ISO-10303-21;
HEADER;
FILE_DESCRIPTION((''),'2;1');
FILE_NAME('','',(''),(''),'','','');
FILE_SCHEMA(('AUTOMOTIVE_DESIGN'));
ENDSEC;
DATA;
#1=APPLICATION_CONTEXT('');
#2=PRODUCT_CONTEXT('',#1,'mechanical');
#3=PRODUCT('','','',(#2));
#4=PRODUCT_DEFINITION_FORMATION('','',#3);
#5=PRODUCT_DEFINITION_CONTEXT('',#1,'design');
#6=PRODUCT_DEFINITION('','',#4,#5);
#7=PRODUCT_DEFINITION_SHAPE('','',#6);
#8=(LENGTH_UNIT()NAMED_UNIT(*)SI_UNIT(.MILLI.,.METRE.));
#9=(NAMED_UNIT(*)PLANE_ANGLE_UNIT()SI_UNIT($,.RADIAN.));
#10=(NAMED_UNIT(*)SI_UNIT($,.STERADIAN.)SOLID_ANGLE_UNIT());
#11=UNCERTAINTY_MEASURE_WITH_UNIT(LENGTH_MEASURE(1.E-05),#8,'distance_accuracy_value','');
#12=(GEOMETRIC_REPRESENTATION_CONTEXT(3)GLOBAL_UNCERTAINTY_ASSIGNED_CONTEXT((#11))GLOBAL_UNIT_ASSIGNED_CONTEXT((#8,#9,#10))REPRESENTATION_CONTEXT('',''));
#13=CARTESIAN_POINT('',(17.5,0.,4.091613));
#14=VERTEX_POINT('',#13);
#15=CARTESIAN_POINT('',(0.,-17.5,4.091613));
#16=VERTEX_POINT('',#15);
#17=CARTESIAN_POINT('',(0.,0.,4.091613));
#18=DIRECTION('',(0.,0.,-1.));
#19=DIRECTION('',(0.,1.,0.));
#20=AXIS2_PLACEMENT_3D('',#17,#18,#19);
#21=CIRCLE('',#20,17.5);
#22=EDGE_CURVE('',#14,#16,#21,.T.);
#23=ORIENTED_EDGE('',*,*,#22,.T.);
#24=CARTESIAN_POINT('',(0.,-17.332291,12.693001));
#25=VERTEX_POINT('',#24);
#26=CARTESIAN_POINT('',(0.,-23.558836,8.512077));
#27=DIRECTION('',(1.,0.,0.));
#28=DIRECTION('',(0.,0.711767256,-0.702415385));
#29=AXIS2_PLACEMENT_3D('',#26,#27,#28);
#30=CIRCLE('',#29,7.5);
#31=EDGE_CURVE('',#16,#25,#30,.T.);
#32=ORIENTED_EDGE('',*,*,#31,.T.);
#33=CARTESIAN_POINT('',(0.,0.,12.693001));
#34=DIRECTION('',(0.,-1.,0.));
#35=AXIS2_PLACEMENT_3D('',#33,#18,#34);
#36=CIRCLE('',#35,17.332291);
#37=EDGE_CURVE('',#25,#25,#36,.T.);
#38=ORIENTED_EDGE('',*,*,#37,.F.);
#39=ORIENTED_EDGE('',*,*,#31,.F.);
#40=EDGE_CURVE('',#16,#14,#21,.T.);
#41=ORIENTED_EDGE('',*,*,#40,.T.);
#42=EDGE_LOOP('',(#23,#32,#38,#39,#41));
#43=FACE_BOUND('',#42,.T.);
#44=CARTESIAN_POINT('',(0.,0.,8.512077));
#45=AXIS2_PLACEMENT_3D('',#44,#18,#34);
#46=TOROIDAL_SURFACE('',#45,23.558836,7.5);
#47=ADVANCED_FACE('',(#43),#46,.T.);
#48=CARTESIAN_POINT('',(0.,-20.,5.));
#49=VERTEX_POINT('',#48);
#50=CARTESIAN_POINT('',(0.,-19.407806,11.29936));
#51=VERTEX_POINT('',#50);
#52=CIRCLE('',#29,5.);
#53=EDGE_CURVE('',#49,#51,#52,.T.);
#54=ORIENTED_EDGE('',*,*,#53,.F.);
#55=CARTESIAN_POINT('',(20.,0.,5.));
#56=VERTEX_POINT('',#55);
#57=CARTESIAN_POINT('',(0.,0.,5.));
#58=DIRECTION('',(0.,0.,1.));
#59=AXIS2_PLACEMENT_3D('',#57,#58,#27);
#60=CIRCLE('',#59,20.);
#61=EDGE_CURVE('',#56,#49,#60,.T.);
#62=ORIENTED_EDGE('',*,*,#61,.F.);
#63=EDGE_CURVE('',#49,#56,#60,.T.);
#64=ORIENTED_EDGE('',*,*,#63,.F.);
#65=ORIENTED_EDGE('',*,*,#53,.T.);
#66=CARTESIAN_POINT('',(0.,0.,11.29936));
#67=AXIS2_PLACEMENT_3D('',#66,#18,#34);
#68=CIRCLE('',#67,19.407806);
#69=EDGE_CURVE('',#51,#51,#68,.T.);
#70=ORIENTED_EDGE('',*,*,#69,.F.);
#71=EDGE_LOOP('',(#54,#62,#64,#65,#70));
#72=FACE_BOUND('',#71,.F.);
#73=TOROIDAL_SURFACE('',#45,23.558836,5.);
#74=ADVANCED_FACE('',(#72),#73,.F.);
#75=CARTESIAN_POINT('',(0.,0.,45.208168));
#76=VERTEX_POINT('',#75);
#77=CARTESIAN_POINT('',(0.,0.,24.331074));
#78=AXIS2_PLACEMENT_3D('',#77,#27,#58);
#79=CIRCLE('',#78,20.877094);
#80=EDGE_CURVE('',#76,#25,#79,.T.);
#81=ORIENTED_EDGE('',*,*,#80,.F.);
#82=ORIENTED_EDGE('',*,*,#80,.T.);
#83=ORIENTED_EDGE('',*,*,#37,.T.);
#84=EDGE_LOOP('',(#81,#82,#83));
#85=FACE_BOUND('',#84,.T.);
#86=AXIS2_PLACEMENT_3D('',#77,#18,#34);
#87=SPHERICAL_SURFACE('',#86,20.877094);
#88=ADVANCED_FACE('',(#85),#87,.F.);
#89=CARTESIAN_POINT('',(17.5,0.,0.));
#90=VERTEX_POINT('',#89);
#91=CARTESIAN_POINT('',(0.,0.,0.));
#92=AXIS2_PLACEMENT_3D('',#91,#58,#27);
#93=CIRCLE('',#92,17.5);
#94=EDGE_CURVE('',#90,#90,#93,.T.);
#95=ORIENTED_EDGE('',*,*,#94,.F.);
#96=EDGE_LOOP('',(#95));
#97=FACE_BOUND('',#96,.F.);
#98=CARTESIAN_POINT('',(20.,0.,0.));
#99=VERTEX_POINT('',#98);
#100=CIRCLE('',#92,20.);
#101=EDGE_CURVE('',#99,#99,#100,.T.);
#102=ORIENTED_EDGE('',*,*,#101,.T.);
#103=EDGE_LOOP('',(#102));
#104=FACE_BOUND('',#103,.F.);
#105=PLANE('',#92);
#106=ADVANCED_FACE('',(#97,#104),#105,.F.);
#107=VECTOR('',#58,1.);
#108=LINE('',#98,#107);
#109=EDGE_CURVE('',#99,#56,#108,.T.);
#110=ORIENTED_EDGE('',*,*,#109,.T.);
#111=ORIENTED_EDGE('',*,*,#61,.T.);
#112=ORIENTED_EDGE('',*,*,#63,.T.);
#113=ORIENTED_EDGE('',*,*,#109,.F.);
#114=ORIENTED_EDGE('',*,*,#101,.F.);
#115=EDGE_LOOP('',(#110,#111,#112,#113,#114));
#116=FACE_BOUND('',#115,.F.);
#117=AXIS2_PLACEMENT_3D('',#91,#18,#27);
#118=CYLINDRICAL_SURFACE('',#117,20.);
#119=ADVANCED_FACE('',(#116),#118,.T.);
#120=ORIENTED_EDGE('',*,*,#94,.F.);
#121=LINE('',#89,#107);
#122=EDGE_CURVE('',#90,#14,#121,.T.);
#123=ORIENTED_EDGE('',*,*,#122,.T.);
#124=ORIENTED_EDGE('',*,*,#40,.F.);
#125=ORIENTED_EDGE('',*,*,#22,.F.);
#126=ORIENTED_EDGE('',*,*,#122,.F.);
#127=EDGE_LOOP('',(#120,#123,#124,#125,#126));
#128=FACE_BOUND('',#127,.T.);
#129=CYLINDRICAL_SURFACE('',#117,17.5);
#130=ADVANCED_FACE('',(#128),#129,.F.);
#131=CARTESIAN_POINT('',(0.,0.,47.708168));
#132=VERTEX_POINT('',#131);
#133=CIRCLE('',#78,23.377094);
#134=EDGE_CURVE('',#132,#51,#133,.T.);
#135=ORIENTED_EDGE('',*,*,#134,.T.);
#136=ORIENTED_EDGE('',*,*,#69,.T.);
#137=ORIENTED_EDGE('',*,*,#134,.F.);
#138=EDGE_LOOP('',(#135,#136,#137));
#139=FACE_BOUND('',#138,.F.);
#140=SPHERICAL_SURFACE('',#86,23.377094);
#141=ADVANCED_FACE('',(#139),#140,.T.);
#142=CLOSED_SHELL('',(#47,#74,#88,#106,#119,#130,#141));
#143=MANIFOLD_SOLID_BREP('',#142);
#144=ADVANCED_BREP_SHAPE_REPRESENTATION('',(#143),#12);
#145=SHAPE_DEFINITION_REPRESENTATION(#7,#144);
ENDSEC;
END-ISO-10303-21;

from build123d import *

# Parameters (mm, degrees)
F0_R     = 20
F1_DEPTH = 5
F5_T     = -2.5


# Not quite as in the source:
# - a fillet or chamfer that OpenCascade refuses, or shapes differently, is made with other operations: its cross-section is extruded or revolved along the edge and cut away or added


with BuildPart() as f1:
    # F0 (on Top) → F1 (new body)
    with BuildSketch(Plane.XY):
        Circle(F0_R)
    extrude(amount=F1_DEPTH)

    # F2 (on Right) → F3 (revolve)
    with BuildSketch(Plane.YZ):
        with BuildLine():
            Line((0, 0.953980596), (0, 47.7081678201))
            ThreePointArc((0, 47.7081678201), (-23.377093612, 24.331074208), (0, 0.953980596))
        make_face()
    revolve(axis=Axis((0, 0, 23.85408391), (0, 0, 1)))

    # F4: fillet of radius 5 on 1 edges, made by hand

    # F4_s1 → F4_t2 (revolve)
    with BuildSketch(Plane.YZ):
        with BuildLine():
            ThreePointArc((-20, 5), (-18.5807849657, 8.0440971034), (-19.4078057687, 11.2993597778))
            Line((-19.4078057687, 11.2993597778), (-19.3247851585, 11.3551054348))
            ThreePointArc((-19.3247851585, 11.3551054348), (-16.5075665861, 7.9200007382), (-13.0890367821, 5.0826923763))
            Line((-13.0890367821, 5.0826923763), (-13.1452681871, 4.9))
            ThreePointArc((-13.1452681871, 4.9), (-16.5726340935, 4.9), (-19.9288232744, 4.9297584615))
            Line((-19.9288232744, 4.9297584615), (-20, 5))
        make_face()
    revolve(axis=Axis((0, 0, 5), (0, 0, -1)))

    # F5
    f5_openings = [f1.faces().sort_by_distance(p)[0] for p in [
        (0, 0, 0),
    ]]
    offset(amount=F5_T, openings=f5_openings)


solid = f1.part
